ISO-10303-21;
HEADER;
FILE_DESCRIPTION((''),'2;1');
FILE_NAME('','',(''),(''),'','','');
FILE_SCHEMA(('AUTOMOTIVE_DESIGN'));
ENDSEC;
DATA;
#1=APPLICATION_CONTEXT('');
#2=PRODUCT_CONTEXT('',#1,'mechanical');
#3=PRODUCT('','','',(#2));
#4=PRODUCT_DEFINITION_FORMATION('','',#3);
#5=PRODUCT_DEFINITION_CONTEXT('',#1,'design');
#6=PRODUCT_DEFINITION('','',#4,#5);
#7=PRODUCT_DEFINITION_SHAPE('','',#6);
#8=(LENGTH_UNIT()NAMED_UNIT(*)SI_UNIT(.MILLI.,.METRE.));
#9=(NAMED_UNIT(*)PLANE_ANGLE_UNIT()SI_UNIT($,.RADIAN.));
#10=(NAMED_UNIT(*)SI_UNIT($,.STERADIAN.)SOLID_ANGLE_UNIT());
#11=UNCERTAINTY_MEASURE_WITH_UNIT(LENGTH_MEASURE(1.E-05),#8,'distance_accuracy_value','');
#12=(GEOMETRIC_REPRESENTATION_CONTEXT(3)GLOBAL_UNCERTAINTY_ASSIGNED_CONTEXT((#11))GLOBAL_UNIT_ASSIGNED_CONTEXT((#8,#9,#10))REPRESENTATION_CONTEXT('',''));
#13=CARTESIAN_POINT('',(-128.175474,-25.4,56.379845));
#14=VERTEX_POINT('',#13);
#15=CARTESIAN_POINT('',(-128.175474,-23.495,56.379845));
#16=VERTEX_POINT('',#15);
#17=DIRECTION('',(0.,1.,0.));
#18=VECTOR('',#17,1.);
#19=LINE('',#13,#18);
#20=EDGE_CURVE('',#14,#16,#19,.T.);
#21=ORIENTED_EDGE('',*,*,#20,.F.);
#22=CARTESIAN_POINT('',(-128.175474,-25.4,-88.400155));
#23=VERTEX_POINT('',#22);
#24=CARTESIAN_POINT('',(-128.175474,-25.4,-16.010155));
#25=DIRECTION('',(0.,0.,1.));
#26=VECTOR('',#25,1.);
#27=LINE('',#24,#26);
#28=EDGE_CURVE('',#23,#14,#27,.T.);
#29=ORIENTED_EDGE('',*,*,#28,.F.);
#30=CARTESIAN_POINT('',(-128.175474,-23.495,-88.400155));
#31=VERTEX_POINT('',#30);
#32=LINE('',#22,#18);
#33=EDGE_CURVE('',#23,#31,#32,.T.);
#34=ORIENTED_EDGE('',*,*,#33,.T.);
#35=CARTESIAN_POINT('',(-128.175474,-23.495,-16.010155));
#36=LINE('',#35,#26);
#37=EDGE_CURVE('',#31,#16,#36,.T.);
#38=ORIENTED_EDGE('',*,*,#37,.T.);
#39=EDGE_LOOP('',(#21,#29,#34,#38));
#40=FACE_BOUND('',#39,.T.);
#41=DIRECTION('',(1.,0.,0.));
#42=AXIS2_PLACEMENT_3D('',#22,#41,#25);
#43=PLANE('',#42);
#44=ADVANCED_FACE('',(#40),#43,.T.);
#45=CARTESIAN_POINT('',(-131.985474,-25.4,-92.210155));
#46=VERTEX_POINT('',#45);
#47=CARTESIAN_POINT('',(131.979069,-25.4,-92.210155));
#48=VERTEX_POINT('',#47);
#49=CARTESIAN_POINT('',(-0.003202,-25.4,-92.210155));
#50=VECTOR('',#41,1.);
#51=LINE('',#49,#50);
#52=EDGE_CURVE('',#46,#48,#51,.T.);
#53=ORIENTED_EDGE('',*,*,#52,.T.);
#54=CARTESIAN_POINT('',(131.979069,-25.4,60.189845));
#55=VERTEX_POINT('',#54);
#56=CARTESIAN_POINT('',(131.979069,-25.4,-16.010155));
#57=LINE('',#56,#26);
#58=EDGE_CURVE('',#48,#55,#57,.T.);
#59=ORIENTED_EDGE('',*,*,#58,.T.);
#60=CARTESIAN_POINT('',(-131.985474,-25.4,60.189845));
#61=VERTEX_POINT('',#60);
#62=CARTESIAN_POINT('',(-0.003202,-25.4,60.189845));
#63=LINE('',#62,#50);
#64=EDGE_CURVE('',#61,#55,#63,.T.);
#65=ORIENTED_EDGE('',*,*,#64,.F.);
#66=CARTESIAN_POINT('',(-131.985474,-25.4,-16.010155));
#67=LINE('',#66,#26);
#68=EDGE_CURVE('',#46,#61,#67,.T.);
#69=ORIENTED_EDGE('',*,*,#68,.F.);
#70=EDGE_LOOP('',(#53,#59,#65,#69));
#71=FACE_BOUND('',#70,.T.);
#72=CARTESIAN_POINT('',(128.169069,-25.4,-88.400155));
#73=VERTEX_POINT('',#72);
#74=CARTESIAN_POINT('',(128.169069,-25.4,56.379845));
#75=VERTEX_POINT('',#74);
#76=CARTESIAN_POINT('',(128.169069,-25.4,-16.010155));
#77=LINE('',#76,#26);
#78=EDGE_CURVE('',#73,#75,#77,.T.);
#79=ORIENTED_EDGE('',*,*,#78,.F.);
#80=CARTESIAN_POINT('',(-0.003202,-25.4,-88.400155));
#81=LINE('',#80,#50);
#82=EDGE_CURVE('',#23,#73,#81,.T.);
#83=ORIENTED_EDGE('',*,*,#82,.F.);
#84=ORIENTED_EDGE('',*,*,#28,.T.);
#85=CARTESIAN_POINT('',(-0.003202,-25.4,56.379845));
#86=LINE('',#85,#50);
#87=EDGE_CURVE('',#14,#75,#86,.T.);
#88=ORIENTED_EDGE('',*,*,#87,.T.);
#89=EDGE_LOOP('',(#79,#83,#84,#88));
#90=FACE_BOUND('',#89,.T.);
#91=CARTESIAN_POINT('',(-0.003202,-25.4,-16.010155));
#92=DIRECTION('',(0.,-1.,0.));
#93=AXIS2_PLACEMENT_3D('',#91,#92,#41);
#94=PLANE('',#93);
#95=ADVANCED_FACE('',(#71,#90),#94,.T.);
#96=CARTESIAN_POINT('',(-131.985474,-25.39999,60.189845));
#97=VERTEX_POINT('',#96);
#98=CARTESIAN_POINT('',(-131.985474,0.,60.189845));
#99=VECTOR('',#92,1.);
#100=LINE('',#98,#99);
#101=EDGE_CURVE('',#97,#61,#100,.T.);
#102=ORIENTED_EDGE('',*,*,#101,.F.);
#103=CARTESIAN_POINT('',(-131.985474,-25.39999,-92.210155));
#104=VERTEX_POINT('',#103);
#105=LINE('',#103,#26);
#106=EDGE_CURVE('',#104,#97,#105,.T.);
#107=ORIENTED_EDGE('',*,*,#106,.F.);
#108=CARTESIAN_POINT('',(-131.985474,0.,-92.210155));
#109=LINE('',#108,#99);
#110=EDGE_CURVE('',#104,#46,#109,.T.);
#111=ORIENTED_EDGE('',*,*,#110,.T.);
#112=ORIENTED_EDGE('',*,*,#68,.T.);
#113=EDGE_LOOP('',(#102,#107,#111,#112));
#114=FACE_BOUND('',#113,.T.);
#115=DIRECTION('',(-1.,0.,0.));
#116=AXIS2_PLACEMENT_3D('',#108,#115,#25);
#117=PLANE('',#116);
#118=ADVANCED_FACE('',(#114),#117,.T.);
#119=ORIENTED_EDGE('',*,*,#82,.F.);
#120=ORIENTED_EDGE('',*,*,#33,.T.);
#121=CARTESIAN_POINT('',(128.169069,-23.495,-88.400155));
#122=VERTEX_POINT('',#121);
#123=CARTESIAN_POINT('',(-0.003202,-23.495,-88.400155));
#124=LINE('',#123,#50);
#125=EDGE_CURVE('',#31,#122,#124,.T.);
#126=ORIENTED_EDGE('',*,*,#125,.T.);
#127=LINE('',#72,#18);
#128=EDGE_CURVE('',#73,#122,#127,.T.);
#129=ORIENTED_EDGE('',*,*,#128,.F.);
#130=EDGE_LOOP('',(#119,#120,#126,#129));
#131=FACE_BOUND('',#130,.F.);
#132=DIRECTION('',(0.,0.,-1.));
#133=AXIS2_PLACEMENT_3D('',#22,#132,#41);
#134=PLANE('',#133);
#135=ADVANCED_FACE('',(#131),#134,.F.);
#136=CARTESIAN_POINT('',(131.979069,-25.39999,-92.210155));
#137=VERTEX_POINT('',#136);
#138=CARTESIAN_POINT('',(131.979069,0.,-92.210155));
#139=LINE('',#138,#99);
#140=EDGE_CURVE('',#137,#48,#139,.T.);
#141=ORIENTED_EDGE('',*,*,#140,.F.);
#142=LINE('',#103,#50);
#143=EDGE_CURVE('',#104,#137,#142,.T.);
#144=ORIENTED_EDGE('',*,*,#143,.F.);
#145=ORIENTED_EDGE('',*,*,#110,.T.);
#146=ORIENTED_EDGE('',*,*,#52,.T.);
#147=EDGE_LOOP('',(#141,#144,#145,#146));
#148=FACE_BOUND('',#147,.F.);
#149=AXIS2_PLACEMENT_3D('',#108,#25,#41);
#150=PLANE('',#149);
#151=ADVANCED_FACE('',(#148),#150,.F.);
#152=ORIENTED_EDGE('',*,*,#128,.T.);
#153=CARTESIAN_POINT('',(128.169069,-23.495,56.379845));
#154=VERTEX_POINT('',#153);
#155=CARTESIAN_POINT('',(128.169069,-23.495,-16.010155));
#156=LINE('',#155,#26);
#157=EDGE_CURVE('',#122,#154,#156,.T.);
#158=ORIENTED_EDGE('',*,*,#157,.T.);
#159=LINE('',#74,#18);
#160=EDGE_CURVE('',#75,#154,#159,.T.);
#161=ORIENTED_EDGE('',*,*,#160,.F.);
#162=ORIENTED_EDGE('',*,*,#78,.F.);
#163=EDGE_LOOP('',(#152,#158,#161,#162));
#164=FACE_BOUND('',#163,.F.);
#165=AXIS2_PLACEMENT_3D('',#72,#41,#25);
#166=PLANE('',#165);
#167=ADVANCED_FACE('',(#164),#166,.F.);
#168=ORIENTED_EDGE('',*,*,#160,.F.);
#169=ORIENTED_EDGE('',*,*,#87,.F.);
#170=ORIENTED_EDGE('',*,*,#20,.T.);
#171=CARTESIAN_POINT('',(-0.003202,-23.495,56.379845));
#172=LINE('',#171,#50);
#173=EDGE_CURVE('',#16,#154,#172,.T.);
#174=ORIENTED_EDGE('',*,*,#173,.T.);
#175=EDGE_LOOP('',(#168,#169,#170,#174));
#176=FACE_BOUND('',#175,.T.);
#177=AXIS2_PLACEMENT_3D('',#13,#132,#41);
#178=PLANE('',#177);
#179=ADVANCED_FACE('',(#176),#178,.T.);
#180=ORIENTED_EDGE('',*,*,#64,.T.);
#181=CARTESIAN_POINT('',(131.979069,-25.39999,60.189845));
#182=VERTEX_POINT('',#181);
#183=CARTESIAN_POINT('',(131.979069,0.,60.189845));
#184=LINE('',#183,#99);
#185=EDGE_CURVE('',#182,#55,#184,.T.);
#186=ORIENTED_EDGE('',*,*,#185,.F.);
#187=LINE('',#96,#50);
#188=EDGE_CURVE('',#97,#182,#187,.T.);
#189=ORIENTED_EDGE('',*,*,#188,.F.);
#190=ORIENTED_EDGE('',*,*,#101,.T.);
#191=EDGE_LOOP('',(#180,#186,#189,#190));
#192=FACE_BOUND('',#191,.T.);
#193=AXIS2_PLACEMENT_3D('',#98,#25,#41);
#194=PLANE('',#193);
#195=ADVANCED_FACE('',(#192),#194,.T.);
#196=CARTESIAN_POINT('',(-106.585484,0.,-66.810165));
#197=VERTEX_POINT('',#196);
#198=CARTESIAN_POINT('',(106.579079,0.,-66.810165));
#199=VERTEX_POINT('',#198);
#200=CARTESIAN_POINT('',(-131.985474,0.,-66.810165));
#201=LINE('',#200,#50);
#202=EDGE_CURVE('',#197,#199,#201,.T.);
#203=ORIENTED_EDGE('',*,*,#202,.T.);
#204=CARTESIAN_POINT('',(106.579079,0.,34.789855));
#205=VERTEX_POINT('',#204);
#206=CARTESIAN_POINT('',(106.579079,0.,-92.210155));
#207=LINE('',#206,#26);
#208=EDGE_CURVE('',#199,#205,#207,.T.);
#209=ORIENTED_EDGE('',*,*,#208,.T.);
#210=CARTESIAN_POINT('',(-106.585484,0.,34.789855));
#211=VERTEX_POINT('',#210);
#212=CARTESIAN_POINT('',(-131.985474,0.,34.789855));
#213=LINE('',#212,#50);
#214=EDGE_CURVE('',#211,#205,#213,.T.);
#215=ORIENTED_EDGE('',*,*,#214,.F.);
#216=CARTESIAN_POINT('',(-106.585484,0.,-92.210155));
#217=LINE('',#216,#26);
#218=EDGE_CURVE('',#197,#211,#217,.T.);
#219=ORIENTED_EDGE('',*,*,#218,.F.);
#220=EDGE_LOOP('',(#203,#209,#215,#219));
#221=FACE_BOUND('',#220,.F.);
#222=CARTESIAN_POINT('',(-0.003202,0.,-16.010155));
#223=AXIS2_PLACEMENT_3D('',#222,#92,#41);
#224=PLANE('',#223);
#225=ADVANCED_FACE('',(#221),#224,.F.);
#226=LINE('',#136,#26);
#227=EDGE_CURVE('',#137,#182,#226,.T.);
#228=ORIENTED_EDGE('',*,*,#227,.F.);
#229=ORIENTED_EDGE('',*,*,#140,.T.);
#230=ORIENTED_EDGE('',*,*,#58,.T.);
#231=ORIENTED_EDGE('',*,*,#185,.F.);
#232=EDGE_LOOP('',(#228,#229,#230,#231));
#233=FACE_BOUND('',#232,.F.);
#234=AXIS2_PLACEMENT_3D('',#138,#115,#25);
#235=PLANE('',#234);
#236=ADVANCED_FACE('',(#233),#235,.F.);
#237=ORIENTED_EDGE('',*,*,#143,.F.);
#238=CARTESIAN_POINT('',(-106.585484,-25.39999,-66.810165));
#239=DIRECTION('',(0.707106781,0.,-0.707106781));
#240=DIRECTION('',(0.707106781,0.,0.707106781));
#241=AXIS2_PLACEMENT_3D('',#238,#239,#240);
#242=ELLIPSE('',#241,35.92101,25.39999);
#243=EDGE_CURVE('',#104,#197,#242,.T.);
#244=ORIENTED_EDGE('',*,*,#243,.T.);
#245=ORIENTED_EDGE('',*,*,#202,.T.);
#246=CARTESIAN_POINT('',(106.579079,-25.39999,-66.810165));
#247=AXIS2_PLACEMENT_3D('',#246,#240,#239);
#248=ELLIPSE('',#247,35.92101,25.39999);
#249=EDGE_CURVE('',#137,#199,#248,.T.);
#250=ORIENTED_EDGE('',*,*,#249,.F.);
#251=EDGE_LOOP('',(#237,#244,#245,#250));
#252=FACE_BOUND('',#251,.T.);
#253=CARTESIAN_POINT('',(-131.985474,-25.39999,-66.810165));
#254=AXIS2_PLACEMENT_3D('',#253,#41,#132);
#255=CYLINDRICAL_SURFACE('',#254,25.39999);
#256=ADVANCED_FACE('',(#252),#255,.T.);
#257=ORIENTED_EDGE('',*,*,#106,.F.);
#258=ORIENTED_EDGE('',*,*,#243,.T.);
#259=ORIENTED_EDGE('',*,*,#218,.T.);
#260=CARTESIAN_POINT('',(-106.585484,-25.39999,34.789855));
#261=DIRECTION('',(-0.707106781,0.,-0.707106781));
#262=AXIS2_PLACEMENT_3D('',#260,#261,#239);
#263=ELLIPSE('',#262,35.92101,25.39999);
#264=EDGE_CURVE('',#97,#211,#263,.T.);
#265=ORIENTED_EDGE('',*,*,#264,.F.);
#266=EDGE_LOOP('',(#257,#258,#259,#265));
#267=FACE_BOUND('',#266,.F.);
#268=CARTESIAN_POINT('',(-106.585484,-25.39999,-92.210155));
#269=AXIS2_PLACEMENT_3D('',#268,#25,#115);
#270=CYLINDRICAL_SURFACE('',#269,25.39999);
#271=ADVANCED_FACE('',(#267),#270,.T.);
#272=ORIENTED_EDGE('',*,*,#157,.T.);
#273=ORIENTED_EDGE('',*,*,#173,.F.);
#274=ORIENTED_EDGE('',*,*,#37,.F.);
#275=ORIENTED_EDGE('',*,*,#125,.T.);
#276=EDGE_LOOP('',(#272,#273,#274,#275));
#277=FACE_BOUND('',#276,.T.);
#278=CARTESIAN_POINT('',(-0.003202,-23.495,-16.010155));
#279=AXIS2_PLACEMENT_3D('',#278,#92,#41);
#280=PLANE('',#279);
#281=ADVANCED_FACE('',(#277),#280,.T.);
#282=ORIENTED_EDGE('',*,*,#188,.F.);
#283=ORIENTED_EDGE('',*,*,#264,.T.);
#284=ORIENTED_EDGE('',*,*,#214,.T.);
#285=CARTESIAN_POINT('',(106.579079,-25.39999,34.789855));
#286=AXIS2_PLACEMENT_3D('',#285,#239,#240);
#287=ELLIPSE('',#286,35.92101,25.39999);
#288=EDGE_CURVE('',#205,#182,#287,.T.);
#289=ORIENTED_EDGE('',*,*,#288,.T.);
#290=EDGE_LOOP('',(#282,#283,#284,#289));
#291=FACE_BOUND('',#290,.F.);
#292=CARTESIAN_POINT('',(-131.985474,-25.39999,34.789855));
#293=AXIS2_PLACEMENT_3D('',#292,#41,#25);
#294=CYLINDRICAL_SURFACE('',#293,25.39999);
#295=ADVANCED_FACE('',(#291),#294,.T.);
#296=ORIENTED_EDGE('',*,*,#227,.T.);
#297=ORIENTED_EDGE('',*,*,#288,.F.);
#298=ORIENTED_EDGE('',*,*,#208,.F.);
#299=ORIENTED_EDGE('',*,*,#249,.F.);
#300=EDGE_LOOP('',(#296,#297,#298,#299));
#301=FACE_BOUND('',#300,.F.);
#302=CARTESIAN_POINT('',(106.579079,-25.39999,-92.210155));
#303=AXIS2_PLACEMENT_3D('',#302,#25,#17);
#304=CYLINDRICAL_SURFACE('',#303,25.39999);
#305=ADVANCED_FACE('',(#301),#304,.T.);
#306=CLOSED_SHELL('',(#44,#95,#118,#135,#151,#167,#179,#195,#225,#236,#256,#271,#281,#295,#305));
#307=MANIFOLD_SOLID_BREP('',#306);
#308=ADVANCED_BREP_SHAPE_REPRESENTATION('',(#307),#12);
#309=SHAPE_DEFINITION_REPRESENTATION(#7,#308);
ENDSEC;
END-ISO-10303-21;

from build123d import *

# Parameters (mm, degrees)
F0_W     = 263.9645430735
F0_H     = 152.4
F1_DEPTH = 25.4
F2_W     = 256.3445430735
F2_H     = 144.78
F3_DEPTH = 1.905
F4_R     = 25.39999


# Not quite as in the source:
# - a fillet or chamfer is up to 0.001 mm smaller than in the source, because OpenCascade refuses the exact size


with BuildPart() as f1:
    # F0 (on Front) → F1 (new body)
    with BuildSketch(Plane.XZ):
        with Locations((-0.0032023633, -16.0101552037)):
            Rectangle(F0_W, F0_H)
    extrude(amount=F1_DEPTH)

    # F2 (on face) → F3 (cut)
    with BuildSketch(Plane.XZ.offset(25.4)):
        with Locations((-0.0032023633, -16.0101552037)):
            Rectangle(F2_W, F2_H)
    extrude(amount=-F3_DEPTH, mode=Mode.SUBTRACT)

    # F4 (radius 25.4 in the source; OpenCascade refuses exactly that, so slightly less here)
    f4_edges = [f1.edges().sort_by_distance(p)[0] for p in [
        (-0.003202, 0, -92.210155),
        (131.979069, 0, -16.010155),
        (-0.003202, 0, 60.189845),
        (-131.985474, 0, -16.010155),
    ]]
    fillet(f4_edges, radius=F4_R)


solid = f1.part
